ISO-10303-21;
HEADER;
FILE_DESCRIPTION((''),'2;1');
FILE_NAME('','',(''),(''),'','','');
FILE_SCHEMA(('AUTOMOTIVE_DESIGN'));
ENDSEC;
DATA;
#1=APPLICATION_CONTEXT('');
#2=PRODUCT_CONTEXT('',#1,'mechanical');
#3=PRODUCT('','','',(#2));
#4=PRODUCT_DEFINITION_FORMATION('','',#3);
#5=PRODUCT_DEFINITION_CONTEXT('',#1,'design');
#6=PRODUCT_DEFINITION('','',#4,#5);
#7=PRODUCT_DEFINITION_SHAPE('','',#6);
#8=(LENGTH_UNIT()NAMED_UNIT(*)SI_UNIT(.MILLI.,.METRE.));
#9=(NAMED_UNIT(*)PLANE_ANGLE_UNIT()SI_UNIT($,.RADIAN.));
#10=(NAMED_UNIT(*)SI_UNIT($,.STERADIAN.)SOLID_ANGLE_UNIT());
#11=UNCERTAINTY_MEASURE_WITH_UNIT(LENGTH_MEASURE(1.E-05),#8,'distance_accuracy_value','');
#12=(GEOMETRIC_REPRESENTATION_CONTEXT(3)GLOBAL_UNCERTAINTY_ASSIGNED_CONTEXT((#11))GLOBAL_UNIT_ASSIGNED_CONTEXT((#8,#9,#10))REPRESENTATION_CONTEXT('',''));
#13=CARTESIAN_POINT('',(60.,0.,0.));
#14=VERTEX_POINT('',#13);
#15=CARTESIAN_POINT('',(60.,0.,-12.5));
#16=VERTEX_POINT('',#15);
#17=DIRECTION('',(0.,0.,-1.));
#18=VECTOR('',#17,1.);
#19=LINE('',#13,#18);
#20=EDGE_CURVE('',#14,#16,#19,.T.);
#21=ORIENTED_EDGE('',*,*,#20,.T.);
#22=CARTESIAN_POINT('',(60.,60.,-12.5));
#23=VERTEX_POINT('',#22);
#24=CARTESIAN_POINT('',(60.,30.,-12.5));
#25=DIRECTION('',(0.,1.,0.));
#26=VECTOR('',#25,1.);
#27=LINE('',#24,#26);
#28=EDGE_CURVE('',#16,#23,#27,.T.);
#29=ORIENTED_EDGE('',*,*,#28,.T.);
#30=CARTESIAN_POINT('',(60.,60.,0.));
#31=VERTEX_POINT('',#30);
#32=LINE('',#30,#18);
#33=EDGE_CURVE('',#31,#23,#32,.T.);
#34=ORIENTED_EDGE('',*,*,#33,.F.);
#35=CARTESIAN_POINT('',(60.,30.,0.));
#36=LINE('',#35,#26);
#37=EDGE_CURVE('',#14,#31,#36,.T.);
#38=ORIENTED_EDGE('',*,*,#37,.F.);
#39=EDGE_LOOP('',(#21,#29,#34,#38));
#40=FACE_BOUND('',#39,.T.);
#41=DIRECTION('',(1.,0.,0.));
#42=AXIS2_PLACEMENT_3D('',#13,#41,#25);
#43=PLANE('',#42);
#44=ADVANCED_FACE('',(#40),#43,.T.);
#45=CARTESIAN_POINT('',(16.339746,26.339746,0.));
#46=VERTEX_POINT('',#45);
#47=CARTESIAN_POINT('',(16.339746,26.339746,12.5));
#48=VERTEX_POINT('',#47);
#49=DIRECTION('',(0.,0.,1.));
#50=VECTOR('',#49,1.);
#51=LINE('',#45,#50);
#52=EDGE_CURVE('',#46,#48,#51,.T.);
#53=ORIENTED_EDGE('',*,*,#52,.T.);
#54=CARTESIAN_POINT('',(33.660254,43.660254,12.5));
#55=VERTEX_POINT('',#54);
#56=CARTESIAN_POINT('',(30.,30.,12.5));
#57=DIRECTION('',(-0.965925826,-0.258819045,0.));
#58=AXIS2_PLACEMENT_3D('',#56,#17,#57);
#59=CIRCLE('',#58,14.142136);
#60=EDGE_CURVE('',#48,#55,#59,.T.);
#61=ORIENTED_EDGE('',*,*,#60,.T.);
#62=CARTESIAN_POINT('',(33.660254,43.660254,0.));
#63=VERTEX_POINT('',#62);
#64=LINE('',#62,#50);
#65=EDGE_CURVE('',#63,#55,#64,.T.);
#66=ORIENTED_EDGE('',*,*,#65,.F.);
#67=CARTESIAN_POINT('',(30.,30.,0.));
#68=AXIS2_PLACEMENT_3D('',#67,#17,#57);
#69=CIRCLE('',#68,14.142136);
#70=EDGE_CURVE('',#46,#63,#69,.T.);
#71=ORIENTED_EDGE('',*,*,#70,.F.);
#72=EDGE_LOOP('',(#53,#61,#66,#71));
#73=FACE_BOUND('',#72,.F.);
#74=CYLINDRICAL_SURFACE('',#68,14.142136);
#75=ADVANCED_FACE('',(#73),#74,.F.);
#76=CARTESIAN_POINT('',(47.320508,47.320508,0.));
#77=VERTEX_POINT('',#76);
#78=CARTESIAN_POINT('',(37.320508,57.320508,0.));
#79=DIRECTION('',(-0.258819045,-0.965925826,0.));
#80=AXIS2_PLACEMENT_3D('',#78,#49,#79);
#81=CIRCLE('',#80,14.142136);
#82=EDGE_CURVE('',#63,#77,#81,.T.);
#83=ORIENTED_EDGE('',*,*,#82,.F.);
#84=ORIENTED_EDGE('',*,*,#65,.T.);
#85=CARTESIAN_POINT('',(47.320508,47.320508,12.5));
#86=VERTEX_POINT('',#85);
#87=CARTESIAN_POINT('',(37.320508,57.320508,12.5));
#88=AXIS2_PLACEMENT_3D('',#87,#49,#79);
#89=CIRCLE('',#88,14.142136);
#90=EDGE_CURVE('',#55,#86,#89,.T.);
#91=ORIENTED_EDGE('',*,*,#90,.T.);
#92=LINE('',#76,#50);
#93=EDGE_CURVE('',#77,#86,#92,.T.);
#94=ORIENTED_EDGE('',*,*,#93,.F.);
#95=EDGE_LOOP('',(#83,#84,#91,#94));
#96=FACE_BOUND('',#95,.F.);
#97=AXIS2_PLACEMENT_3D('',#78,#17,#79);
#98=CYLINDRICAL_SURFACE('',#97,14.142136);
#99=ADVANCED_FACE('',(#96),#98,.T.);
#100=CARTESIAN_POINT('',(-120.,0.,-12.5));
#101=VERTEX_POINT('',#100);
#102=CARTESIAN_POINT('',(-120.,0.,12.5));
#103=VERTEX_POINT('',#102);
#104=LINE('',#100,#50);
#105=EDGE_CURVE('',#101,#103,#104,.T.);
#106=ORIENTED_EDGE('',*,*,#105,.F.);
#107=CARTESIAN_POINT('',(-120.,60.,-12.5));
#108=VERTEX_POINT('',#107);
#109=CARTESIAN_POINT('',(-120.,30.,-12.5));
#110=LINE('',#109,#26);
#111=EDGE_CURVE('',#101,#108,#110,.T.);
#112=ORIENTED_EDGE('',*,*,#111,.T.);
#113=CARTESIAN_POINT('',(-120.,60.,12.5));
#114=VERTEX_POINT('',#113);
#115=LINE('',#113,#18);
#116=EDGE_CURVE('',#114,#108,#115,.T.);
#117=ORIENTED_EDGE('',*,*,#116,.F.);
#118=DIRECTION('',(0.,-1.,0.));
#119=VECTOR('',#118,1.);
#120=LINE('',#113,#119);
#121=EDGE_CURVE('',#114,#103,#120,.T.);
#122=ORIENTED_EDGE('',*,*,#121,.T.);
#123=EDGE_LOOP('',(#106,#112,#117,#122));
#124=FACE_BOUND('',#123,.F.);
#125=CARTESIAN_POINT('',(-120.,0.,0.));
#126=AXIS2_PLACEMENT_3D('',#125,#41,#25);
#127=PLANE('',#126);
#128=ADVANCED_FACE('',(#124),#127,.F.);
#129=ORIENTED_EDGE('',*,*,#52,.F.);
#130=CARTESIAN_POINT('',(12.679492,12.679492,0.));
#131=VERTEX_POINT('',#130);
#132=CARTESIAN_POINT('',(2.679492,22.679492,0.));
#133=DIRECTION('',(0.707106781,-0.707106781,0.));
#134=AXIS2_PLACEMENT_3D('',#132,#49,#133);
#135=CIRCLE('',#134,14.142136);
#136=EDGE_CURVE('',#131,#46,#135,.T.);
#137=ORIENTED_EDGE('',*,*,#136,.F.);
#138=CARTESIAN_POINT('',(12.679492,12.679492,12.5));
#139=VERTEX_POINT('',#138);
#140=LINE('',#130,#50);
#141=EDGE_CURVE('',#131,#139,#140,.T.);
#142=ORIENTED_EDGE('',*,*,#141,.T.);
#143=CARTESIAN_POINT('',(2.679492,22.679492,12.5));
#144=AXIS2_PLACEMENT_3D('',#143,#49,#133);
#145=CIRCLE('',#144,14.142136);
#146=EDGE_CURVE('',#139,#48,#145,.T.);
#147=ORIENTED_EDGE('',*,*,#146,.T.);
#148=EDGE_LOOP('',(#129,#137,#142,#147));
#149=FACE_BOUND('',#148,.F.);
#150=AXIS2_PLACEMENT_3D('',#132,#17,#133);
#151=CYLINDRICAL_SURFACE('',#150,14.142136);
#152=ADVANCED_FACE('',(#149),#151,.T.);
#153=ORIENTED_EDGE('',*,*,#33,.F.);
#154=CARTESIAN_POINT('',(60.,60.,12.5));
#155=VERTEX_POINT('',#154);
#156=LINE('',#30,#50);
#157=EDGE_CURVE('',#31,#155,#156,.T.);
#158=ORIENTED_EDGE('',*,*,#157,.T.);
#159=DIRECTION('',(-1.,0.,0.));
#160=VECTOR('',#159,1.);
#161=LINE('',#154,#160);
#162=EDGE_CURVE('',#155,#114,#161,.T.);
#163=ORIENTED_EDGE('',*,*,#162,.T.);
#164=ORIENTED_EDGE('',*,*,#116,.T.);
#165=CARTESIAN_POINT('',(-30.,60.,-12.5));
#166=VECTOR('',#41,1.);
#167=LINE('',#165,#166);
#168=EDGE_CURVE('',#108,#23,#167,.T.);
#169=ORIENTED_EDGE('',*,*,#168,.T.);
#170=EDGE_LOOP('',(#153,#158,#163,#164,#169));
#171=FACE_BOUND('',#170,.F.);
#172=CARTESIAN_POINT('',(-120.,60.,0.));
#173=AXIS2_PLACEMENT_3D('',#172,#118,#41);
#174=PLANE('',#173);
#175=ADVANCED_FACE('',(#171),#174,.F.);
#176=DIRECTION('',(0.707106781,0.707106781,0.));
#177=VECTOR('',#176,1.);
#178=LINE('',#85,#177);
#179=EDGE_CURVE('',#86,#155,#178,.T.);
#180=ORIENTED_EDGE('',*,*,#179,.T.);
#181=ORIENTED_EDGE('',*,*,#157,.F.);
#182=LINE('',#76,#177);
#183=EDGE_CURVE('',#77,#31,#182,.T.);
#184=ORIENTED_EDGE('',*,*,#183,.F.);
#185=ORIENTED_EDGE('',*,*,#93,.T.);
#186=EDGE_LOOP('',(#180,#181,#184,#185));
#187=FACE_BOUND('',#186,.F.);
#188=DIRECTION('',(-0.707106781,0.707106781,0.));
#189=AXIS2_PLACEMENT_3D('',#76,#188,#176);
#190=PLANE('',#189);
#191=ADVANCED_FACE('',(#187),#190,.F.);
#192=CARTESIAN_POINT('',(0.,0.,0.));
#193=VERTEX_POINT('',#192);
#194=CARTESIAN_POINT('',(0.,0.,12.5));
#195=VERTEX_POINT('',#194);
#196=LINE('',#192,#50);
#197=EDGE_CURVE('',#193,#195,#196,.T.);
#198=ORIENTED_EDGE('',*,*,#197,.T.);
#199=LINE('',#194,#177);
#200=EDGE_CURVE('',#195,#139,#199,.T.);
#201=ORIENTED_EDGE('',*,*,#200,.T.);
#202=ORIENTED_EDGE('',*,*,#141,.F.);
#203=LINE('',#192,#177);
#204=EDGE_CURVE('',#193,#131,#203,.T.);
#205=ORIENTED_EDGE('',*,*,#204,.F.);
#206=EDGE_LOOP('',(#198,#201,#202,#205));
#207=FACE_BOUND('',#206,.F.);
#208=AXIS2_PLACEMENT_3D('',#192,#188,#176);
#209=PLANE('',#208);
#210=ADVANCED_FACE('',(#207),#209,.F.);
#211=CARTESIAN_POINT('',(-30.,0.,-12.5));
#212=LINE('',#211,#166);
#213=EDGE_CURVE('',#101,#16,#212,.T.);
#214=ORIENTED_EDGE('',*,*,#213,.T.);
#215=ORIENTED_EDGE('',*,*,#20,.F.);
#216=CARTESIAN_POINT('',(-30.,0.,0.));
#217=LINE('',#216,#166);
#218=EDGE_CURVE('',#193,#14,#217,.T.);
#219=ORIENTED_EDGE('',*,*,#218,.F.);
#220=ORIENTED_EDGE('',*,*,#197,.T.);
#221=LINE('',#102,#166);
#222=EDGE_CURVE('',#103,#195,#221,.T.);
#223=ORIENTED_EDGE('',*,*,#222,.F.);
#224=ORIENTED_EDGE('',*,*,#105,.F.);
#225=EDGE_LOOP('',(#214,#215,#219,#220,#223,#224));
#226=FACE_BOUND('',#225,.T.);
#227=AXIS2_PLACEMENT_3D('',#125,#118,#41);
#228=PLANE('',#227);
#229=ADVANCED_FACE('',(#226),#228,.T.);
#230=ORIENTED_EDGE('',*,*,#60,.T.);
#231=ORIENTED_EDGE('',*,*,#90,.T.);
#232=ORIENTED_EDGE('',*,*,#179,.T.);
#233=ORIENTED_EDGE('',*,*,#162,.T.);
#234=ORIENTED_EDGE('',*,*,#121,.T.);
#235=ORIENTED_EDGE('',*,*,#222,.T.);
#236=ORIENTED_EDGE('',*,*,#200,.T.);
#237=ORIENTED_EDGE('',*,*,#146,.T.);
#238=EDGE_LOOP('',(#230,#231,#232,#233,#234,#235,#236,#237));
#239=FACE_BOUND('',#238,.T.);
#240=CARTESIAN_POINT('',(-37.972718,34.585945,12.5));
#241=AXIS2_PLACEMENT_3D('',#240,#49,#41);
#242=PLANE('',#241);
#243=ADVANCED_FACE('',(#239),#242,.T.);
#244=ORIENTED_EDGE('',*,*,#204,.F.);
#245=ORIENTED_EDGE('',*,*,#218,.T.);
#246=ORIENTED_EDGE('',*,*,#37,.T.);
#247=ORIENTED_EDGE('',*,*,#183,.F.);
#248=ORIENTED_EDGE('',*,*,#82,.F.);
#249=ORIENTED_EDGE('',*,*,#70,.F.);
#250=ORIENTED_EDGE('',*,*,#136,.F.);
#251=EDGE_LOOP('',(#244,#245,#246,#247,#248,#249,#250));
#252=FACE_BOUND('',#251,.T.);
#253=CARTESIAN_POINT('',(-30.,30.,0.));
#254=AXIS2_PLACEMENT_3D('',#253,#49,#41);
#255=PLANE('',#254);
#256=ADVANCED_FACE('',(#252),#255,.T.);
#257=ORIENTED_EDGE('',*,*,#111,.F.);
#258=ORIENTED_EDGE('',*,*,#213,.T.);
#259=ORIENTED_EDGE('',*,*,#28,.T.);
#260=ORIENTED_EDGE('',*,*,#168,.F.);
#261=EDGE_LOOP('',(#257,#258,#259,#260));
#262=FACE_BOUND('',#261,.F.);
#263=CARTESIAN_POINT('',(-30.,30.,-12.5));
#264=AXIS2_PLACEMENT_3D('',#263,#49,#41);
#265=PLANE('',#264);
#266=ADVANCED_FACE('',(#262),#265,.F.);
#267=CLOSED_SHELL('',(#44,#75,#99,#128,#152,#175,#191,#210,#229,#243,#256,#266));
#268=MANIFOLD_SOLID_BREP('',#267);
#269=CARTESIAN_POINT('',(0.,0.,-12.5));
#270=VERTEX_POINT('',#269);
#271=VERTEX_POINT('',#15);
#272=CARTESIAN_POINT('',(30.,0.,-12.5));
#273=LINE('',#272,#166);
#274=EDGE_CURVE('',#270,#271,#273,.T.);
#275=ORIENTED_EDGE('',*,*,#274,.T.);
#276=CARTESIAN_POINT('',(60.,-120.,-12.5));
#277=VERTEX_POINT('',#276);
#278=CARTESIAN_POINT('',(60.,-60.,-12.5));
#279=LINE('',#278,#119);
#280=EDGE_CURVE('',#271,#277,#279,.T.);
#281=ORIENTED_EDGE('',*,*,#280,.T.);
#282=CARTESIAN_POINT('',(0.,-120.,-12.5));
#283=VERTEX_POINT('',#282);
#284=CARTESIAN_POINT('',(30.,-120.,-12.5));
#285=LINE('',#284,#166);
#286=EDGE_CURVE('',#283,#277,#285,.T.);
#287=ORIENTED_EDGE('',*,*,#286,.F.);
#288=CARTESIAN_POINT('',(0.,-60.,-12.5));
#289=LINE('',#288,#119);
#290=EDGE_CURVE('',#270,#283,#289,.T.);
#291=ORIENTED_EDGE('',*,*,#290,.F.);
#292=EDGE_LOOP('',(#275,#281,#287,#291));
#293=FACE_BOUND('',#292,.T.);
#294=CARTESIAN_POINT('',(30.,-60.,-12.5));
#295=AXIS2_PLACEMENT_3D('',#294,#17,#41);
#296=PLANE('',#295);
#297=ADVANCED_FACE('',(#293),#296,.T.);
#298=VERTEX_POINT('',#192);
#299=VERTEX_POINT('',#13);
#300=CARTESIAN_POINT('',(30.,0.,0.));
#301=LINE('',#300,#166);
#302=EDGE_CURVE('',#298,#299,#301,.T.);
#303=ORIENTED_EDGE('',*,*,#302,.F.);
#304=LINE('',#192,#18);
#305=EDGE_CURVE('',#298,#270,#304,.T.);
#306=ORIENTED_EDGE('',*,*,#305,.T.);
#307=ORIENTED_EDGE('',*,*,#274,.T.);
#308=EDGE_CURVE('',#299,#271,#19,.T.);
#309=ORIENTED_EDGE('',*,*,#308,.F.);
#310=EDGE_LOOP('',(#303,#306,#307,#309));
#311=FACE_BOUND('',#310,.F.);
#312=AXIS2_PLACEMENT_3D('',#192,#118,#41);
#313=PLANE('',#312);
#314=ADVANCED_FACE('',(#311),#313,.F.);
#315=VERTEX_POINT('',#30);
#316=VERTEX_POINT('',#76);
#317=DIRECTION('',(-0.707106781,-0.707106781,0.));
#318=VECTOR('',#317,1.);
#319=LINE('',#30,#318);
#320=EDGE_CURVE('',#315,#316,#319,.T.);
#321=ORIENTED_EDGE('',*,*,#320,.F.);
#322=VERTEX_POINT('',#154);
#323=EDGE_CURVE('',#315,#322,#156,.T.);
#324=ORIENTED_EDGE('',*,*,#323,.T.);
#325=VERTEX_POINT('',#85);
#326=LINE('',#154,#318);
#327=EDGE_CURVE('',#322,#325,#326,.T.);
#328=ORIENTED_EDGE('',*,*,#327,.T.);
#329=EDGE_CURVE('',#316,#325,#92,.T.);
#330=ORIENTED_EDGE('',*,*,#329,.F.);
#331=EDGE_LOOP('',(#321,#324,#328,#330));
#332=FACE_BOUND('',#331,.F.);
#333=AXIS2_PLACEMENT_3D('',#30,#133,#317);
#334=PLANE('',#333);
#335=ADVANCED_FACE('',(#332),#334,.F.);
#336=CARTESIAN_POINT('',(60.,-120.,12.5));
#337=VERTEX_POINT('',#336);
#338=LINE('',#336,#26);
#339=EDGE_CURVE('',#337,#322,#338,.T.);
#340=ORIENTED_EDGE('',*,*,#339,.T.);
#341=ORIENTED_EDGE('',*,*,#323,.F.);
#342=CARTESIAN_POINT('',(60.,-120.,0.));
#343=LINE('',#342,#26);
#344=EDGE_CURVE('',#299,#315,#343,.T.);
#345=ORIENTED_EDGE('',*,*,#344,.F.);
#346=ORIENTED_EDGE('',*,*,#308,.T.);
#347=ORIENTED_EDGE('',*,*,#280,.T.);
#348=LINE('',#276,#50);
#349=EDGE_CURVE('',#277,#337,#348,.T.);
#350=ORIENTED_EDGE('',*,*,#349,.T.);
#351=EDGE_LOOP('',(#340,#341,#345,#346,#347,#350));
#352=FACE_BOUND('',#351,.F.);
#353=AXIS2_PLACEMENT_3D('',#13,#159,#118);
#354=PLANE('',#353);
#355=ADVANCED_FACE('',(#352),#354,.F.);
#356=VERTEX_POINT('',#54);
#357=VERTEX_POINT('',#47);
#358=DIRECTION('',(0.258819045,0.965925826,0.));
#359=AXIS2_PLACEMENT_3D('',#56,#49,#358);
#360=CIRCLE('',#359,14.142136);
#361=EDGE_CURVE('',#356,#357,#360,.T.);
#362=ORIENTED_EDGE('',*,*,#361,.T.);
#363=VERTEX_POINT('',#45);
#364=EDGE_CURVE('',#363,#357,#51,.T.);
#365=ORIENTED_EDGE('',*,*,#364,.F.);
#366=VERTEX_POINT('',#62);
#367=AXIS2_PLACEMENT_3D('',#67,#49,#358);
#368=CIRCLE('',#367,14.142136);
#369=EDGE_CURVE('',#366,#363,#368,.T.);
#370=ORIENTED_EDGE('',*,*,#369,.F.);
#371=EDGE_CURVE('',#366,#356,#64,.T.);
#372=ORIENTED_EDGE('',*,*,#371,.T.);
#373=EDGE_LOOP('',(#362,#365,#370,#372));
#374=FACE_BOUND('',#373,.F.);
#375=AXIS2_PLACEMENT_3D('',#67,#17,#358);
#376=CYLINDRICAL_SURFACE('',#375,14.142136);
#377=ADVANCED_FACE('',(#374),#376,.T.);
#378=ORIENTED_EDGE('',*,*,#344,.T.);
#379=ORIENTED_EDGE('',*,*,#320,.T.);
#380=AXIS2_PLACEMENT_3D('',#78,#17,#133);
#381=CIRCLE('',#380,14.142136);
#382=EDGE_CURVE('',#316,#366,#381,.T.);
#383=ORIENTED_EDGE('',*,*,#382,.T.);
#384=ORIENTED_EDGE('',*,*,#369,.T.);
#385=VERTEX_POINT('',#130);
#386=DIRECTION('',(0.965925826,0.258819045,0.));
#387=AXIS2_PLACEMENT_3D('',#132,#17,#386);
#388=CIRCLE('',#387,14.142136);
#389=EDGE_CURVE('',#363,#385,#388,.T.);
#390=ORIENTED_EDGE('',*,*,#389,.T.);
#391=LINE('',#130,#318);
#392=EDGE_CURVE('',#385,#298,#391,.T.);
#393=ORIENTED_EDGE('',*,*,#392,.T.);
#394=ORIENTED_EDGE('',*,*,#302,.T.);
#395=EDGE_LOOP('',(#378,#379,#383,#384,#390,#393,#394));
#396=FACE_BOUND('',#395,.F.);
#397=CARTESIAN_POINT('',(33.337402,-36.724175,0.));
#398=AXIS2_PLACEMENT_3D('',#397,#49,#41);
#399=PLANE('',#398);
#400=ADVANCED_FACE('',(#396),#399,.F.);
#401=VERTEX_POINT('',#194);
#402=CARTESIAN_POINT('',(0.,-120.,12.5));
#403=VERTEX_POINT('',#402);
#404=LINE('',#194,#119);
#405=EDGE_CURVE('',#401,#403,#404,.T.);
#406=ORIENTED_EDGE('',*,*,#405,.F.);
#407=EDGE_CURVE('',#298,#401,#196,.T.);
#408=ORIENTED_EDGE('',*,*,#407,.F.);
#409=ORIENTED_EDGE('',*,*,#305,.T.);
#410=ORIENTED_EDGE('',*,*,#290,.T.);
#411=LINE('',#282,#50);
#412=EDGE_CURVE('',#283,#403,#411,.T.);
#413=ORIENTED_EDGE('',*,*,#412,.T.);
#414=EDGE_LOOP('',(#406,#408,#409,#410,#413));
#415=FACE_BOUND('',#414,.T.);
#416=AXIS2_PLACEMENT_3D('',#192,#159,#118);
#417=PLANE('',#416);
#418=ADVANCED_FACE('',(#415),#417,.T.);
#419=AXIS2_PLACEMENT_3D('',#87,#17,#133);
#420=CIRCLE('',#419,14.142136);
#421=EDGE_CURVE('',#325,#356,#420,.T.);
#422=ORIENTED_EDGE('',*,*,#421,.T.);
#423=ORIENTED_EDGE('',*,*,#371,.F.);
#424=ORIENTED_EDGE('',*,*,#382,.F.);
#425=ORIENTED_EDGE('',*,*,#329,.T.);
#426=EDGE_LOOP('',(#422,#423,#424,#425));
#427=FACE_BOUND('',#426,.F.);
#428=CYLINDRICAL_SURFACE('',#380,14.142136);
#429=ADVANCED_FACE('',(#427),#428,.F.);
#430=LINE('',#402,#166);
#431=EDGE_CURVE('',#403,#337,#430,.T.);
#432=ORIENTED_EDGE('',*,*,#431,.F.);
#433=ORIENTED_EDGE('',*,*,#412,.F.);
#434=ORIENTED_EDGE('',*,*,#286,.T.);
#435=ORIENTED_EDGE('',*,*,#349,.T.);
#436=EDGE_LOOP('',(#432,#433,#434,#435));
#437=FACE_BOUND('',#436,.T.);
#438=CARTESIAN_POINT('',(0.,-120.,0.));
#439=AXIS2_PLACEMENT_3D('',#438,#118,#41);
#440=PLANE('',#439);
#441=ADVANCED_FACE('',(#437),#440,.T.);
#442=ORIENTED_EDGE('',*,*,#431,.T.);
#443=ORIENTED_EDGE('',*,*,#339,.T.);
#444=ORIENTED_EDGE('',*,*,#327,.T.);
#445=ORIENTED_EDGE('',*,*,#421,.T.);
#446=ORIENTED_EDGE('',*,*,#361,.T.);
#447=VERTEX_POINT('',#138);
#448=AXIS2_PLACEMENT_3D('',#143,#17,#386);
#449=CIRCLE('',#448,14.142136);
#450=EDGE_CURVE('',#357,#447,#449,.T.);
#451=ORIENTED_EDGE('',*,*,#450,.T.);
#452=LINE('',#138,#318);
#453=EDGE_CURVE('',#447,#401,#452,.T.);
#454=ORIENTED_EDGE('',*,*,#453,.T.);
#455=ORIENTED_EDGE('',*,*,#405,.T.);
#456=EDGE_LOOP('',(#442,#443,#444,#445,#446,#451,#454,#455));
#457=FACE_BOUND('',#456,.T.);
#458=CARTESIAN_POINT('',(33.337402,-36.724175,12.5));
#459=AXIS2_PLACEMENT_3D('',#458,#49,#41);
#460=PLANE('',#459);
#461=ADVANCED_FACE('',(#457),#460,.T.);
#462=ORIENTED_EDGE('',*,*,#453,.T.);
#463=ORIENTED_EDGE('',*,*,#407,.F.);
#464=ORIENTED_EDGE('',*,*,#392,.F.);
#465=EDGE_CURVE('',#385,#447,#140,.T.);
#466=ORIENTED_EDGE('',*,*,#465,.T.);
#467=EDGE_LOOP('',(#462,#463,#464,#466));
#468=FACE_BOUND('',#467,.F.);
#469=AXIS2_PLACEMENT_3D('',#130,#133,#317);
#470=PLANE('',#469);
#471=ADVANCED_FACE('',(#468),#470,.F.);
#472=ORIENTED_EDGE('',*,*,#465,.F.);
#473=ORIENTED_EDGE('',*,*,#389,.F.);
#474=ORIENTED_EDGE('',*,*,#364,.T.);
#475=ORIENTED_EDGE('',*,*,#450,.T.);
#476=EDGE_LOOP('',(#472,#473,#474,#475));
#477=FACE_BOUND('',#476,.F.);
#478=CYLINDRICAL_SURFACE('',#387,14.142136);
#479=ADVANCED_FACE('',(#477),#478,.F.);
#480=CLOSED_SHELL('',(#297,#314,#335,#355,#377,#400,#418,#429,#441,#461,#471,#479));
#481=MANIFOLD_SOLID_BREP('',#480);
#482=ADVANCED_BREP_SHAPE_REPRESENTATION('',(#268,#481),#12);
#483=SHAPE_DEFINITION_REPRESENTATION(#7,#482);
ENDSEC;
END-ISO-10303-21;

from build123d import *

# Parameters (mm, degrees)
F2_DEPTH = 12.5
F3_W     = 180
F3_H     = 60
F4_DEPTH = 12.5
F6_DEPTH = 12.5
F7_W     = 60
F7_H     = 120
F8_DEPTH = 12.5


with BuildPart() as f2:
    # F1 (on Top) → F2 (new body)
    with BuildSketch(Plane.XY):
        with BuildLine():
            Line((-120, 0), (0, 0))
            Line((0, 0), (12.6794919243, 12.6794919243))
            ThreePointArc((12.6794919243, 12.6794919243), (16.3397459622, 19.0192378865), (16.3397459622, 26.3397459622))
            ThreePointArc((16.3397459622, 26.3397459622), (20, 40), (33.6602540378, 43.6602540378))
            ThreePointArc((33.6602540378, 43.6602540378), (40.9807621135, 43.6602540378), (47.3205080757, 47.3205080757))
            Line((47.3205080757, 47.3205080757), (60, 60))
            Line((60, 60), (-120, 60))
            Line((-120, 60), (-120, 0))
        make_face()
    extrude(amount=F2_DEPTH)

    # F3 (on Top) → F4 (join)
    with BuildSketch(Plane.XY):
        with Locations((-30, 30)):
            Rectangle(F3_W, F3_H)
    extrude(amount=-F4_DEPTH)


with BuildPart() as f6:
    # F5 (on Top) → F6 (new body)
    with BuildSketch(Plane.XY):
        with BuildLine():
            Line((60, -120), (60, 60))
            Line((60, 60), (47.3205080757, 47.3205080757))
            ThreePointArc((47.3205080757, 47.3205080757), (40.9807621135, 43.6602540378), (33.6602540378, 43.6602540378))
            ThreePointArc((33.6602540378, 43.6602540378), (20, 40), (16.3397459622, 26.3397459622))
            ThreePointArc((16.3397459622, 26.3397459622), (16.3397459622, 19.0192378865), (12.6794919243, 12.6794919243))
            Line((12.6794919243, 12.6794919243), (0, 0))
            Line((0, 0), (0, -120))
            Line((0, -120), (60, -120))
        make_face()
    extrude(amount=F6_DEPTH)

    # F7 (on face) → F8 (join)
    with BuildSketch(Plane(origin=(0, 0, 0), x_dir=(1, 0, 0), z_dir=(0, 0, -1))):
        with Locations((30, 60)):
            Rectangle(F7_W, F7_H)
    extrude(amount=F8_DEPTH)


solid = Compound([f2.part, f6.part])
